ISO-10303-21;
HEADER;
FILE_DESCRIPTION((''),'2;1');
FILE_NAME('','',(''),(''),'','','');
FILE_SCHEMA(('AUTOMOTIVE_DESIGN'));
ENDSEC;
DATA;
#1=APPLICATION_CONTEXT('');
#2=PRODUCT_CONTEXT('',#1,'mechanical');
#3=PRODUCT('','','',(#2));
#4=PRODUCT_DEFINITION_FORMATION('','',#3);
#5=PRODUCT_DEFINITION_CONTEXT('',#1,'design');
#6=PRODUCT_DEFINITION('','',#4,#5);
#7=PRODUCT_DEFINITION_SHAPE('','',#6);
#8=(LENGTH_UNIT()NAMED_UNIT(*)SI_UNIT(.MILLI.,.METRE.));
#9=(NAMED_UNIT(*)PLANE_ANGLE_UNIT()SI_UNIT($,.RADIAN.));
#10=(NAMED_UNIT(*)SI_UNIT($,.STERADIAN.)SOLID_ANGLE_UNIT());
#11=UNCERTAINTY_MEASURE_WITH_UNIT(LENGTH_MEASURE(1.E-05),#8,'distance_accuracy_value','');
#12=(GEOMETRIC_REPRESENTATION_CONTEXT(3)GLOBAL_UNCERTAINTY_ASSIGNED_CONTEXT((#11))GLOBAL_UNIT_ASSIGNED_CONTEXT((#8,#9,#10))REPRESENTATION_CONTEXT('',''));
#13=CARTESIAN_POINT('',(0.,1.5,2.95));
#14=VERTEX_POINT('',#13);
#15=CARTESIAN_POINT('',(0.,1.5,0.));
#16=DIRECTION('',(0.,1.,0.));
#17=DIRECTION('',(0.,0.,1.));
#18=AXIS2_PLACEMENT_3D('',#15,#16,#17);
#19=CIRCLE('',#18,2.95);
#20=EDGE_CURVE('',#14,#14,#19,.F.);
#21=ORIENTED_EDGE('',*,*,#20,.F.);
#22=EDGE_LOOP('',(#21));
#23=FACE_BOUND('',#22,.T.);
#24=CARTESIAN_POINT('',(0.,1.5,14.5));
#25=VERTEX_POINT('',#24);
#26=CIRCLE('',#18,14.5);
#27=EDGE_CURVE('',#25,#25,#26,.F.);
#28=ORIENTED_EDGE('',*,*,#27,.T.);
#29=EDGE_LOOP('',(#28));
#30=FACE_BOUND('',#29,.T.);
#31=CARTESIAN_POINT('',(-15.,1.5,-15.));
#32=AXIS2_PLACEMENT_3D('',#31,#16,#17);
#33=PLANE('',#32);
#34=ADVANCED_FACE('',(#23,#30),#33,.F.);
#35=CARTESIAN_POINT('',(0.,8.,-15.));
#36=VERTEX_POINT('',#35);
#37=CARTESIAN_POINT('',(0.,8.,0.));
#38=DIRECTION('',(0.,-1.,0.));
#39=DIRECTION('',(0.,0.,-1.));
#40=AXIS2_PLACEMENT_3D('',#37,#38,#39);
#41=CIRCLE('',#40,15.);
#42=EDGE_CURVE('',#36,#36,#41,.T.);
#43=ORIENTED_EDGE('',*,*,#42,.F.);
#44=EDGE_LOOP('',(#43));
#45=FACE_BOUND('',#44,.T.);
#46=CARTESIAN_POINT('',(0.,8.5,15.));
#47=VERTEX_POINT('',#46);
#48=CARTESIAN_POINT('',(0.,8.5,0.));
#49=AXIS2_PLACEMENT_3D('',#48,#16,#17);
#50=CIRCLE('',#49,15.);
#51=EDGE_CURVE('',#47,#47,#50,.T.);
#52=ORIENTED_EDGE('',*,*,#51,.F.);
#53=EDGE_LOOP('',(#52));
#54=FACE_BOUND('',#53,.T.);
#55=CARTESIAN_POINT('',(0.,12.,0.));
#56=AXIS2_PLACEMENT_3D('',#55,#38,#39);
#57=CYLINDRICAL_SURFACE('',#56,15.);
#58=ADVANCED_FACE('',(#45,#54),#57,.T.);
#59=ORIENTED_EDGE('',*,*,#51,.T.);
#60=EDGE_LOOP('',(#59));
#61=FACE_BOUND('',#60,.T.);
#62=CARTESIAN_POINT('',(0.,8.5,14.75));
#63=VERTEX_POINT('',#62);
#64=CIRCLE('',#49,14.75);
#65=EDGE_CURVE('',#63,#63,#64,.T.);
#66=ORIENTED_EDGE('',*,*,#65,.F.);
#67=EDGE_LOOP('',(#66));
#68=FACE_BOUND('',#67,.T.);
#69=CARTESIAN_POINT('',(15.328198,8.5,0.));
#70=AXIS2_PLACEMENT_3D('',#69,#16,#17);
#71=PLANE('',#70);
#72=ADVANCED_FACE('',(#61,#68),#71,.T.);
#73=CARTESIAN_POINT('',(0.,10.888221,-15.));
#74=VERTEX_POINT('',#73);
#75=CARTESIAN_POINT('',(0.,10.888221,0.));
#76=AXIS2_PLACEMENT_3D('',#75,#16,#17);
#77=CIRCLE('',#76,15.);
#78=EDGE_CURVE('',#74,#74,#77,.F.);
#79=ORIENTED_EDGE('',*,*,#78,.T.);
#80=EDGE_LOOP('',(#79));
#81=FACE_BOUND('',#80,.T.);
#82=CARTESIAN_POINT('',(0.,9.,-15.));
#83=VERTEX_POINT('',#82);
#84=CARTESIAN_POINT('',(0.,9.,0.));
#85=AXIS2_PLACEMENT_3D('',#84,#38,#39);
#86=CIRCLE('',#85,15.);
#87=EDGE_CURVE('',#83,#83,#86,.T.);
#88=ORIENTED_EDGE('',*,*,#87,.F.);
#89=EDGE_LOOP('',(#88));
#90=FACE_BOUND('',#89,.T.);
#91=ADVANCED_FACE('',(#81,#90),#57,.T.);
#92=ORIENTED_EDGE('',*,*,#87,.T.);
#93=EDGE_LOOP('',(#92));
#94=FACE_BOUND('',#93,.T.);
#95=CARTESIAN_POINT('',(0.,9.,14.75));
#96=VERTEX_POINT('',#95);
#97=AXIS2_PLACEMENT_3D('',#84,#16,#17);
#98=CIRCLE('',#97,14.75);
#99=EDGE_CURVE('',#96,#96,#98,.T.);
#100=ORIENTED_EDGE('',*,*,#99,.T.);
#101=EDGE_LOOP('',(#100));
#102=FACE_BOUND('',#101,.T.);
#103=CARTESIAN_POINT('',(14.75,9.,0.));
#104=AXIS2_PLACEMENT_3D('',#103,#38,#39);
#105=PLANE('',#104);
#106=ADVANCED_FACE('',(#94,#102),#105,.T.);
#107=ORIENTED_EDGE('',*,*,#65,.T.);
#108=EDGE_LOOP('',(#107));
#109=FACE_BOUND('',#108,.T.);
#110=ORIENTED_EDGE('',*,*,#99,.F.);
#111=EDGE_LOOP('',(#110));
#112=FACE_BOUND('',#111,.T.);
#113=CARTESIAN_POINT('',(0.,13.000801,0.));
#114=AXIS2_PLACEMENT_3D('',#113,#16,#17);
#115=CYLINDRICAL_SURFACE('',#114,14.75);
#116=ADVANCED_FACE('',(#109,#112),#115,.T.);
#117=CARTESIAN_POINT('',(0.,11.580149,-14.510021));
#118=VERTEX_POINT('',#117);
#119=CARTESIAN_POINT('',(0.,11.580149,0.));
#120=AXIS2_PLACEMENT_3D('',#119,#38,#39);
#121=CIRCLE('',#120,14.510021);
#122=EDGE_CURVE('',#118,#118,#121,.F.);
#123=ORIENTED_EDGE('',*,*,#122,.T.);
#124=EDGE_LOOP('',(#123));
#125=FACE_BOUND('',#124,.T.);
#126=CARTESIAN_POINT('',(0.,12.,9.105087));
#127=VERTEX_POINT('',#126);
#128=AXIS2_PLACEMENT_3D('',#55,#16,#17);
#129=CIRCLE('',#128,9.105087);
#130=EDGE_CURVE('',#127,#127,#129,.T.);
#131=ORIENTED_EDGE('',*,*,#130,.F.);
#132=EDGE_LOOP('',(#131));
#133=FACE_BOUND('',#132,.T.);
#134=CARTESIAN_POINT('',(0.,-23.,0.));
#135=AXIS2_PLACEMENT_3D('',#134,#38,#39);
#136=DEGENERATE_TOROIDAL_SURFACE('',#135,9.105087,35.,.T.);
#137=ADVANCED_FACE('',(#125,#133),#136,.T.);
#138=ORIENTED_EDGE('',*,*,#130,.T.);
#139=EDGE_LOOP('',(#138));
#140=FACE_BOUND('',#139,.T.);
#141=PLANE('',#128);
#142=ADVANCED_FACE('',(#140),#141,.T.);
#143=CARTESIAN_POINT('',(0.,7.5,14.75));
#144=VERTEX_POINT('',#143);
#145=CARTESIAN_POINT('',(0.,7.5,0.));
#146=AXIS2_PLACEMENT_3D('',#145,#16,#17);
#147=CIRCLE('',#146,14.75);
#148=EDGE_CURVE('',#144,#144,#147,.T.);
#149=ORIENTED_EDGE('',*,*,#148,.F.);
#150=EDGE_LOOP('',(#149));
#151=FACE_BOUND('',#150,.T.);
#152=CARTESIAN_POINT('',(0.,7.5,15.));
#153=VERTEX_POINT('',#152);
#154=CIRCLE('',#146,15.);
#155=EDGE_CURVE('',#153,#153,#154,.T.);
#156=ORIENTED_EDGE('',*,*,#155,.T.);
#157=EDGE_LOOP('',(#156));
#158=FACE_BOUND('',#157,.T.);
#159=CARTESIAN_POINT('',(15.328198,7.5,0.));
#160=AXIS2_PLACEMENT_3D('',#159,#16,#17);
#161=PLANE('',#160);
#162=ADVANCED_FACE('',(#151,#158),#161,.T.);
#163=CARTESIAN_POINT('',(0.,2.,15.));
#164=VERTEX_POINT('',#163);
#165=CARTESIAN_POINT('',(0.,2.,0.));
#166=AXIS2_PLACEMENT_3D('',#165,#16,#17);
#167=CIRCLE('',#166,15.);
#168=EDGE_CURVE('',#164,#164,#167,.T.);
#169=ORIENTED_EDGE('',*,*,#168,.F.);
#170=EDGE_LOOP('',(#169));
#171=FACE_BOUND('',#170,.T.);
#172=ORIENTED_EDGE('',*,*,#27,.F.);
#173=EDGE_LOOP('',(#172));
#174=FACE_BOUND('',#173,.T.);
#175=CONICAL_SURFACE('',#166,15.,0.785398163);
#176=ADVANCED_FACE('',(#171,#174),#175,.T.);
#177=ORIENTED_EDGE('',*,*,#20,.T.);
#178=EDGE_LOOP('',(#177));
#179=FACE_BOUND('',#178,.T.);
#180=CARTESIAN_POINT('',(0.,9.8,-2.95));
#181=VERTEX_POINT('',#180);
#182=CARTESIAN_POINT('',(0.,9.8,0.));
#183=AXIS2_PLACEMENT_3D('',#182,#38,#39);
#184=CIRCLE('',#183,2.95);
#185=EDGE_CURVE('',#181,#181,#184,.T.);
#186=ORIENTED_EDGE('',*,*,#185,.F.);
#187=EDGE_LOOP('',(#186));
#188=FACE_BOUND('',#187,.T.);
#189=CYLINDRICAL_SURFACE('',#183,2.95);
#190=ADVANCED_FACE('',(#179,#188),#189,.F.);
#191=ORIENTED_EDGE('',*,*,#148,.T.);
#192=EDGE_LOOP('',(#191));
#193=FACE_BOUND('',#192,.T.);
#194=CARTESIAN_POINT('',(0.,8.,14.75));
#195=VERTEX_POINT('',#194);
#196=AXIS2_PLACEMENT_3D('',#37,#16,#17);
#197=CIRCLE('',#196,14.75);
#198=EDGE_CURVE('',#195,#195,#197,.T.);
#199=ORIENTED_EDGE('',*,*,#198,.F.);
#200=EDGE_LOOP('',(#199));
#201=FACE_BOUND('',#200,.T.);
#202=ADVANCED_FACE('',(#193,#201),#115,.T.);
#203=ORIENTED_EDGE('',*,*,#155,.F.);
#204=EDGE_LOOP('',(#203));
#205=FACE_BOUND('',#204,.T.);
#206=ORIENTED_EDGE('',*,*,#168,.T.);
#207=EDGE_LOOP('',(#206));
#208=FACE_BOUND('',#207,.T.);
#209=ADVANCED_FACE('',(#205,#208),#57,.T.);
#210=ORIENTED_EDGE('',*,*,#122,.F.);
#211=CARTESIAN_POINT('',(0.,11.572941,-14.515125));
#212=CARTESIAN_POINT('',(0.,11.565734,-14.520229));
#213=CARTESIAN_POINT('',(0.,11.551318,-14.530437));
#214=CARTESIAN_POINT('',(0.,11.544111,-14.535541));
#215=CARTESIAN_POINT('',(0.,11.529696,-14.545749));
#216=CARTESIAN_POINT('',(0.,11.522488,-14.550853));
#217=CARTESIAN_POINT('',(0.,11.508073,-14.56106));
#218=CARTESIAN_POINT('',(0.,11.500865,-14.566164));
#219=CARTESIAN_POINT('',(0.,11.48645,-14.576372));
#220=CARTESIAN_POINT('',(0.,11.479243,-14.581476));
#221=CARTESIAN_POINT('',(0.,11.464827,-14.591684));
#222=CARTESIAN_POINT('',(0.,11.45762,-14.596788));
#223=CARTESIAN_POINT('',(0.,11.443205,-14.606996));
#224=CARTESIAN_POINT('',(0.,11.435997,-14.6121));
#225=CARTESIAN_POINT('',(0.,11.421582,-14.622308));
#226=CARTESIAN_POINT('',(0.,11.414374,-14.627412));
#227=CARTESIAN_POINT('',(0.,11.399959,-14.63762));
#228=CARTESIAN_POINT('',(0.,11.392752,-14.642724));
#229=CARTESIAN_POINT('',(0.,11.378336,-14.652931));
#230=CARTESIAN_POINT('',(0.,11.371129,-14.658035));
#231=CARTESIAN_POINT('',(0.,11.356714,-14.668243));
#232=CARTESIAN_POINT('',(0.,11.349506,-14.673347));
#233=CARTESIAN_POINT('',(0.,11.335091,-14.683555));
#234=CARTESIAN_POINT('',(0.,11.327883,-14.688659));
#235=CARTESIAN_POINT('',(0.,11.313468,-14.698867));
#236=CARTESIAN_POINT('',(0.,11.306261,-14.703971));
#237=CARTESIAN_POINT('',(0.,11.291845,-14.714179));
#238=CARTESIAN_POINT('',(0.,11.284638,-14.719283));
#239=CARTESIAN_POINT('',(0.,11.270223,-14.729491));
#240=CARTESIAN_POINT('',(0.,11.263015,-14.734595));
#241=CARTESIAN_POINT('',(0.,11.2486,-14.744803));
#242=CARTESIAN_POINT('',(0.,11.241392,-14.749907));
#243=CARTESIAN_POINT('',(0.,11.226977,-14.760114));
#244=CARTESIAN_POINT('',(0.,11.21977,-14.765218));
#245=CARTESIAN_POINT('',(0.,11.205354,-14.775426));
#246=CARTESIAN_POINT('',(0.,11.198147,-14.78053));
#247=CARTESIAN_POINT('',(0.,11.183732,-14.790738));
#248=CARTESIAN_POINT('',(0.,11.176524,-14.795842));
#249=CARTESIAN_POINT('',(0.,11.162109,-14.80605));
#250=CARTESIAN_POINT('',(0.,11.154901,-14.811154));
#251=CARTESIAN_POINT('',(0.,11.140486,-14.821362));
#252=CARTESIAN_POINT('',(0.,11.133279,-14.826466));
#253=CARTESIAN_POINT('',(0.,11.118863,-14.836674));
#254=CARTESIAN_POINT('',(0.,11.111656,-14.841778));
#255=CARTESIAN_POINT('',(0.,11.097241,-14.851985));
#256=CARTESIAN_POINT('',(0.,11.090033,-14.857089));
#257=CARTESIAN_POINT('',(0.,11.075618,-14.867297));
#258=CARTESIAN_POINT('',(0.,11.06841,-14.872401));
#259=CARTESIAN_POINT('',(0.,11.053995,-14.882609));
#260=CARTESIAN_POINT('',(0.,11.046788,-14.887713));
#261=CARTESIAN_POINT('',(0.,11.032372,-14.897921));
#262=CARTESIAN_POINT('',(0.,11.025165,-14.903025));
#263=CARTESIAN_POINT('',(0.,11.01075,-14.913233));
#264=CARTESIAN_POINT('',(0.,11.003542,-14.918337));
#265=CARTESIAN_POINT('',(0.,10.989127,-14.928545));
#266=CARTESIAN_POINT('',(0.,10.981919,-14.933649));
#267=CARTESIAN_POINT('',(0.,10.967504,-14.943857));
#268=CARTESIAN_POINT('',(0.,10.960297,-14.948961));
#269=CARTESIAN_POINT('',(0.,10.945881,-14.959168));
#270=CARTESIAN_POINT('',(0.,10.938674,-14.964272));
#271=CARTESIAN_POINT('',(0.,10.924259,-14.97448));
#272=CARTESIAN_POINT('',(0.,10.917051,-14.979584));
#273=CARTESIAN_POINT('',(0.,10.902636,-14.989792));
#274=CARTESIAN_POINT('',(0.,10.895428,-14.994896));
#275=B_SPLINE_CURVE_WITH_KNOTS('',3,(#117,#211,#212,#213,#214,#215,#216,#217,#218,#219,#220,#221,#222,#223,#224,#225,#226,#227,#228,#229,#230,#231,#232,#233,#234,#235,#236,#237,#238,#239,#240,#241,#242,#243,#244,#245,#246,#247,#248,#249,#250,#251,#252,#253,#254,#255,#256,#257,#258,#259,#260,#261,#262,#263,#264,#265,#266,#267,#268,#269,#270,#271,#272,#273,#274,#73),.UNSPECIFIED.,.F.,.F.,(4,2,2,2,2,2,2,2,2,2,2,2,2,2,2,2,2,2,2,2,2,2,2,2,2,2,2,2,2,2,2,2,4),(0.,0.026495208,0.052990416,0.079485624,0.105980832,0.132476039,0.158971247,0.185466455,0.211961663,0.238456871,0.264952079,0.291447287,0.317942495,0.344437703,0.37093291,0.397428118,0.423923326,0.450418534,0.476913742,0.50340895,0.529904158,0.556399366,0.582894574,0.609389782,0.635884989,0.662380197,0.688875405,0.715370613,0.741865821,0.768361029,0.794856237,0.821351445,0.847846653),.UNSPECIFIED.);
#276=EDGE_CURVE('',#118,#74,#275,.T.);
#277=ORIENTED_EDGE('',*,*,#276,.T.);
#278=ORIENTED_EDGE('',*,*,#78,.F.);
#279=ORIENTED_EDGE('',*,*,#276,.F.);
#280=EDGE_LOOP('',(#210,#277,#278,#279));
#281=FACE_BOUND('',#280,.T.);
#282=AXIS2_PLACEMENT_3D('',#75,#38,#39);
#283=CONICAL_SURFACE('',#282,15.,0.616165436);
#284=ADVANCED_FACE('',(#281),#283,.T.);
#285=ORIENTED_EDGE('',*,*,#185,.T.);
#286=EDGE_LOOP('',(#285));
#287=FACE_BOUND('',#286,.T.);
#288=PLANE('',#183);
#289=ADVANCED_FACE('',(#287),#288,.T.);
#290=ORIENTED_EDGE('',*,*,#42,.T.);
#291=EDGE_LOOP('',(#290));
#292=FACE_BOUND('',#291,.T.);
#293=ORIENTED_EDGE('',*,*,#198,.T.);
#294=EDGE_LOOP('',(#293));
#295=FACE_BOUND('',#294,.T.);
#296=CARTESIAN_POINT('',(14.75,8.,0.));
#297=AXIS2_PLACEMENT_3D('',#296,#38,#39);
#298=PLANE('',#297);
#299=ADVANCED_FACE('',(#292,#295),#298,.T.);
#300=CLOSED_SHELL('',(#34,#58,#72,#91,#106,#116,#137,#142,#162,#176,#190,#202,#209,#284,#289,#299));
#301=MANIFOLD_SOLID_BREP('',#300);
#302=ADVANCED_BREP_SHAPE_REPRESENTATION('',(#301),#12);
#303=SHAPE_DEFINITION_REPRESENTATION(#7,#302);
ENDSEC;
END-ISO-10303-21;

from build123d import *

# Parameters (mm, degrees)
SKETCH1_R               = 15
BOSS_EXTRUDE1_DEPTH     = 12
SKETCH2_R               = 2.95
CUT_EXTRUDE1_DEPTH      = 9.8
SKETCH3_W               = 0.578198398
SKETCH3_H               = 0.5
CHAMFER1_SIZE           = 0.5
FILLET1_R               = 35
CHAMFER3_SIZE           = 0.611779298
CUT_EXTRUDE2_DEPTH      = 25.372115214
CUT_EXTRUDE2_DEPTH_BACK = 25.372115214
SKETCH5_W               = 30
SKETCH5_H               = 1.5
CHAMFER4_SIZE           = 0.5


with BuildPart() as part:
    # Sketch1 → Boss-Extrude1 (new body)
    with BuildSketch(Plane(origin=(0, 0, 0), x_dir=(1, 0, 0), z_dir=(0, 1, 0))):
        with Locations(Location((0, 0, 0), (0, 0, 270))):
            Circle(SKETCH1_R)
    extrude(amount=BOSS_EXTRUDE1_DEPTH)

    # Sketch2 → Cut-Extrude1 (cut)
    with BuildSketch(Plane.XZ):
        with Locations(Location((0, 0, 0), (0, 0, 270))):
            Circle(SKETCH2_R)
    extrude(amount=-CUT_EXTRUDE1_DEPTH, mode=Mode.SUBTRACT)

    # Sketch3 → Cut-Revolve1 (revolve, cut)
    with BuildSketch(Plane.XY, mode=Mode.PRIVATE) as cut_revolve1_sk:
        with Locations((15.039099199, 8.75)):
            Rectangle(SKETCH3_W, SKETCH3_H)
        with Locations((15.039099199, 7.75)):
            Rectangle(SKETCH3_W, SKETCH3_H)
    revolve(cut_revolve1_sk.sketch.rotate(Axis((0, 13.00080105, 0), (0, -1, 0)), 90), axis=Axis((0, 13.00080105, 0), (0, -1, 0)), mode=Mode.SUBTRACT)

    # Chamfer1
    chamfer1_edges = [part.edges().sort_by_distance(p)[0] for p in [
        (0, 12, -15),
    ]]
    chamfer(chamfer1_edges, length=CHAMFER1_SIZE)

    # Fillet1
    # the kernel refuses this fillet: 35 mm, written as the material it takes off along each edge
    with BuildSketch(Plane(origin=(0, 12, 0), x_dir=(0, 0, 1), z_dir=(-1, 0, 0))) as fillet1_piece_1:
        with BuildLine():
            CenterArc((9.105086939, -35), FILLET1_R, 80.303678946, 9.696321054)
            Line((9.105086939, 0), (9.105086939, 0.7))
            Line((9.105086939, 0.7), (14.5, 0.7))
            Line((14.5, 0.7), (14.994974747, 0.494974747))
            ThreePointArc((14.994974747, 0.494974747), (15.244974747, 0.244974747), (15.117898261, 0.19))
            Line((15.117898261, 0.19), (15, -0.5))
        make_face()
    revolve(axis=Axis((0, 12, 0), (0, 1, 0)), mode=Mode.SUBTRACT)

    # Chamfer3
    # the kernel refuses this chamfer: 0.611779298, 0.5 mm, written as the material it takes off along each edge
    with BuildSketch(Plane(origin=(0, 11.5, 0), x_dir=(0, 0, 1), z_dir=(-1, 0, 0))) as chamfer3_piece_1:
        with BuildLine():
            Line((15, -CHAMFER3_SIZE), (14.510020918, 0.080148766))
            ThreePointArc((14.510020918, 0.080148766), (14.746676693, 0.042328599), (15, 0))
            Line((15, 0), (15, -CHAMFER3_SIZE))
        make_face()
    revolve(axis=Axis((0, 11.5, 0), (0, 1, 0)), mode=Mode.SUBTRACT)

    # Sketch5 → Cut-Extrude2 (cut, two sides: drawn at the far end of the back side and taken through both)
    with BuildSketch(Plane.XY.offset(-CUT_EXTRUDE2_DEPTH_BACK)):
        with Locations((0, 0.75)):
            Rectangle(SKETCH5_W, SKETCH5_H)
    extrude(amount=CUT_EXTRUDE2_DEPTH + CUT_EXTRUDE2_DEPTH_BACK, mode=Mode.SUBTRACT)

    # Chamfer4
    chamfer4_edges = [part.edges().sort_by_distance(p)[0] for p in [
        (0, 1.5, -15),
    ]]
    chamfer(chamfer4_edges, length=CHAMFER4_SIZE)


solid = part.part
